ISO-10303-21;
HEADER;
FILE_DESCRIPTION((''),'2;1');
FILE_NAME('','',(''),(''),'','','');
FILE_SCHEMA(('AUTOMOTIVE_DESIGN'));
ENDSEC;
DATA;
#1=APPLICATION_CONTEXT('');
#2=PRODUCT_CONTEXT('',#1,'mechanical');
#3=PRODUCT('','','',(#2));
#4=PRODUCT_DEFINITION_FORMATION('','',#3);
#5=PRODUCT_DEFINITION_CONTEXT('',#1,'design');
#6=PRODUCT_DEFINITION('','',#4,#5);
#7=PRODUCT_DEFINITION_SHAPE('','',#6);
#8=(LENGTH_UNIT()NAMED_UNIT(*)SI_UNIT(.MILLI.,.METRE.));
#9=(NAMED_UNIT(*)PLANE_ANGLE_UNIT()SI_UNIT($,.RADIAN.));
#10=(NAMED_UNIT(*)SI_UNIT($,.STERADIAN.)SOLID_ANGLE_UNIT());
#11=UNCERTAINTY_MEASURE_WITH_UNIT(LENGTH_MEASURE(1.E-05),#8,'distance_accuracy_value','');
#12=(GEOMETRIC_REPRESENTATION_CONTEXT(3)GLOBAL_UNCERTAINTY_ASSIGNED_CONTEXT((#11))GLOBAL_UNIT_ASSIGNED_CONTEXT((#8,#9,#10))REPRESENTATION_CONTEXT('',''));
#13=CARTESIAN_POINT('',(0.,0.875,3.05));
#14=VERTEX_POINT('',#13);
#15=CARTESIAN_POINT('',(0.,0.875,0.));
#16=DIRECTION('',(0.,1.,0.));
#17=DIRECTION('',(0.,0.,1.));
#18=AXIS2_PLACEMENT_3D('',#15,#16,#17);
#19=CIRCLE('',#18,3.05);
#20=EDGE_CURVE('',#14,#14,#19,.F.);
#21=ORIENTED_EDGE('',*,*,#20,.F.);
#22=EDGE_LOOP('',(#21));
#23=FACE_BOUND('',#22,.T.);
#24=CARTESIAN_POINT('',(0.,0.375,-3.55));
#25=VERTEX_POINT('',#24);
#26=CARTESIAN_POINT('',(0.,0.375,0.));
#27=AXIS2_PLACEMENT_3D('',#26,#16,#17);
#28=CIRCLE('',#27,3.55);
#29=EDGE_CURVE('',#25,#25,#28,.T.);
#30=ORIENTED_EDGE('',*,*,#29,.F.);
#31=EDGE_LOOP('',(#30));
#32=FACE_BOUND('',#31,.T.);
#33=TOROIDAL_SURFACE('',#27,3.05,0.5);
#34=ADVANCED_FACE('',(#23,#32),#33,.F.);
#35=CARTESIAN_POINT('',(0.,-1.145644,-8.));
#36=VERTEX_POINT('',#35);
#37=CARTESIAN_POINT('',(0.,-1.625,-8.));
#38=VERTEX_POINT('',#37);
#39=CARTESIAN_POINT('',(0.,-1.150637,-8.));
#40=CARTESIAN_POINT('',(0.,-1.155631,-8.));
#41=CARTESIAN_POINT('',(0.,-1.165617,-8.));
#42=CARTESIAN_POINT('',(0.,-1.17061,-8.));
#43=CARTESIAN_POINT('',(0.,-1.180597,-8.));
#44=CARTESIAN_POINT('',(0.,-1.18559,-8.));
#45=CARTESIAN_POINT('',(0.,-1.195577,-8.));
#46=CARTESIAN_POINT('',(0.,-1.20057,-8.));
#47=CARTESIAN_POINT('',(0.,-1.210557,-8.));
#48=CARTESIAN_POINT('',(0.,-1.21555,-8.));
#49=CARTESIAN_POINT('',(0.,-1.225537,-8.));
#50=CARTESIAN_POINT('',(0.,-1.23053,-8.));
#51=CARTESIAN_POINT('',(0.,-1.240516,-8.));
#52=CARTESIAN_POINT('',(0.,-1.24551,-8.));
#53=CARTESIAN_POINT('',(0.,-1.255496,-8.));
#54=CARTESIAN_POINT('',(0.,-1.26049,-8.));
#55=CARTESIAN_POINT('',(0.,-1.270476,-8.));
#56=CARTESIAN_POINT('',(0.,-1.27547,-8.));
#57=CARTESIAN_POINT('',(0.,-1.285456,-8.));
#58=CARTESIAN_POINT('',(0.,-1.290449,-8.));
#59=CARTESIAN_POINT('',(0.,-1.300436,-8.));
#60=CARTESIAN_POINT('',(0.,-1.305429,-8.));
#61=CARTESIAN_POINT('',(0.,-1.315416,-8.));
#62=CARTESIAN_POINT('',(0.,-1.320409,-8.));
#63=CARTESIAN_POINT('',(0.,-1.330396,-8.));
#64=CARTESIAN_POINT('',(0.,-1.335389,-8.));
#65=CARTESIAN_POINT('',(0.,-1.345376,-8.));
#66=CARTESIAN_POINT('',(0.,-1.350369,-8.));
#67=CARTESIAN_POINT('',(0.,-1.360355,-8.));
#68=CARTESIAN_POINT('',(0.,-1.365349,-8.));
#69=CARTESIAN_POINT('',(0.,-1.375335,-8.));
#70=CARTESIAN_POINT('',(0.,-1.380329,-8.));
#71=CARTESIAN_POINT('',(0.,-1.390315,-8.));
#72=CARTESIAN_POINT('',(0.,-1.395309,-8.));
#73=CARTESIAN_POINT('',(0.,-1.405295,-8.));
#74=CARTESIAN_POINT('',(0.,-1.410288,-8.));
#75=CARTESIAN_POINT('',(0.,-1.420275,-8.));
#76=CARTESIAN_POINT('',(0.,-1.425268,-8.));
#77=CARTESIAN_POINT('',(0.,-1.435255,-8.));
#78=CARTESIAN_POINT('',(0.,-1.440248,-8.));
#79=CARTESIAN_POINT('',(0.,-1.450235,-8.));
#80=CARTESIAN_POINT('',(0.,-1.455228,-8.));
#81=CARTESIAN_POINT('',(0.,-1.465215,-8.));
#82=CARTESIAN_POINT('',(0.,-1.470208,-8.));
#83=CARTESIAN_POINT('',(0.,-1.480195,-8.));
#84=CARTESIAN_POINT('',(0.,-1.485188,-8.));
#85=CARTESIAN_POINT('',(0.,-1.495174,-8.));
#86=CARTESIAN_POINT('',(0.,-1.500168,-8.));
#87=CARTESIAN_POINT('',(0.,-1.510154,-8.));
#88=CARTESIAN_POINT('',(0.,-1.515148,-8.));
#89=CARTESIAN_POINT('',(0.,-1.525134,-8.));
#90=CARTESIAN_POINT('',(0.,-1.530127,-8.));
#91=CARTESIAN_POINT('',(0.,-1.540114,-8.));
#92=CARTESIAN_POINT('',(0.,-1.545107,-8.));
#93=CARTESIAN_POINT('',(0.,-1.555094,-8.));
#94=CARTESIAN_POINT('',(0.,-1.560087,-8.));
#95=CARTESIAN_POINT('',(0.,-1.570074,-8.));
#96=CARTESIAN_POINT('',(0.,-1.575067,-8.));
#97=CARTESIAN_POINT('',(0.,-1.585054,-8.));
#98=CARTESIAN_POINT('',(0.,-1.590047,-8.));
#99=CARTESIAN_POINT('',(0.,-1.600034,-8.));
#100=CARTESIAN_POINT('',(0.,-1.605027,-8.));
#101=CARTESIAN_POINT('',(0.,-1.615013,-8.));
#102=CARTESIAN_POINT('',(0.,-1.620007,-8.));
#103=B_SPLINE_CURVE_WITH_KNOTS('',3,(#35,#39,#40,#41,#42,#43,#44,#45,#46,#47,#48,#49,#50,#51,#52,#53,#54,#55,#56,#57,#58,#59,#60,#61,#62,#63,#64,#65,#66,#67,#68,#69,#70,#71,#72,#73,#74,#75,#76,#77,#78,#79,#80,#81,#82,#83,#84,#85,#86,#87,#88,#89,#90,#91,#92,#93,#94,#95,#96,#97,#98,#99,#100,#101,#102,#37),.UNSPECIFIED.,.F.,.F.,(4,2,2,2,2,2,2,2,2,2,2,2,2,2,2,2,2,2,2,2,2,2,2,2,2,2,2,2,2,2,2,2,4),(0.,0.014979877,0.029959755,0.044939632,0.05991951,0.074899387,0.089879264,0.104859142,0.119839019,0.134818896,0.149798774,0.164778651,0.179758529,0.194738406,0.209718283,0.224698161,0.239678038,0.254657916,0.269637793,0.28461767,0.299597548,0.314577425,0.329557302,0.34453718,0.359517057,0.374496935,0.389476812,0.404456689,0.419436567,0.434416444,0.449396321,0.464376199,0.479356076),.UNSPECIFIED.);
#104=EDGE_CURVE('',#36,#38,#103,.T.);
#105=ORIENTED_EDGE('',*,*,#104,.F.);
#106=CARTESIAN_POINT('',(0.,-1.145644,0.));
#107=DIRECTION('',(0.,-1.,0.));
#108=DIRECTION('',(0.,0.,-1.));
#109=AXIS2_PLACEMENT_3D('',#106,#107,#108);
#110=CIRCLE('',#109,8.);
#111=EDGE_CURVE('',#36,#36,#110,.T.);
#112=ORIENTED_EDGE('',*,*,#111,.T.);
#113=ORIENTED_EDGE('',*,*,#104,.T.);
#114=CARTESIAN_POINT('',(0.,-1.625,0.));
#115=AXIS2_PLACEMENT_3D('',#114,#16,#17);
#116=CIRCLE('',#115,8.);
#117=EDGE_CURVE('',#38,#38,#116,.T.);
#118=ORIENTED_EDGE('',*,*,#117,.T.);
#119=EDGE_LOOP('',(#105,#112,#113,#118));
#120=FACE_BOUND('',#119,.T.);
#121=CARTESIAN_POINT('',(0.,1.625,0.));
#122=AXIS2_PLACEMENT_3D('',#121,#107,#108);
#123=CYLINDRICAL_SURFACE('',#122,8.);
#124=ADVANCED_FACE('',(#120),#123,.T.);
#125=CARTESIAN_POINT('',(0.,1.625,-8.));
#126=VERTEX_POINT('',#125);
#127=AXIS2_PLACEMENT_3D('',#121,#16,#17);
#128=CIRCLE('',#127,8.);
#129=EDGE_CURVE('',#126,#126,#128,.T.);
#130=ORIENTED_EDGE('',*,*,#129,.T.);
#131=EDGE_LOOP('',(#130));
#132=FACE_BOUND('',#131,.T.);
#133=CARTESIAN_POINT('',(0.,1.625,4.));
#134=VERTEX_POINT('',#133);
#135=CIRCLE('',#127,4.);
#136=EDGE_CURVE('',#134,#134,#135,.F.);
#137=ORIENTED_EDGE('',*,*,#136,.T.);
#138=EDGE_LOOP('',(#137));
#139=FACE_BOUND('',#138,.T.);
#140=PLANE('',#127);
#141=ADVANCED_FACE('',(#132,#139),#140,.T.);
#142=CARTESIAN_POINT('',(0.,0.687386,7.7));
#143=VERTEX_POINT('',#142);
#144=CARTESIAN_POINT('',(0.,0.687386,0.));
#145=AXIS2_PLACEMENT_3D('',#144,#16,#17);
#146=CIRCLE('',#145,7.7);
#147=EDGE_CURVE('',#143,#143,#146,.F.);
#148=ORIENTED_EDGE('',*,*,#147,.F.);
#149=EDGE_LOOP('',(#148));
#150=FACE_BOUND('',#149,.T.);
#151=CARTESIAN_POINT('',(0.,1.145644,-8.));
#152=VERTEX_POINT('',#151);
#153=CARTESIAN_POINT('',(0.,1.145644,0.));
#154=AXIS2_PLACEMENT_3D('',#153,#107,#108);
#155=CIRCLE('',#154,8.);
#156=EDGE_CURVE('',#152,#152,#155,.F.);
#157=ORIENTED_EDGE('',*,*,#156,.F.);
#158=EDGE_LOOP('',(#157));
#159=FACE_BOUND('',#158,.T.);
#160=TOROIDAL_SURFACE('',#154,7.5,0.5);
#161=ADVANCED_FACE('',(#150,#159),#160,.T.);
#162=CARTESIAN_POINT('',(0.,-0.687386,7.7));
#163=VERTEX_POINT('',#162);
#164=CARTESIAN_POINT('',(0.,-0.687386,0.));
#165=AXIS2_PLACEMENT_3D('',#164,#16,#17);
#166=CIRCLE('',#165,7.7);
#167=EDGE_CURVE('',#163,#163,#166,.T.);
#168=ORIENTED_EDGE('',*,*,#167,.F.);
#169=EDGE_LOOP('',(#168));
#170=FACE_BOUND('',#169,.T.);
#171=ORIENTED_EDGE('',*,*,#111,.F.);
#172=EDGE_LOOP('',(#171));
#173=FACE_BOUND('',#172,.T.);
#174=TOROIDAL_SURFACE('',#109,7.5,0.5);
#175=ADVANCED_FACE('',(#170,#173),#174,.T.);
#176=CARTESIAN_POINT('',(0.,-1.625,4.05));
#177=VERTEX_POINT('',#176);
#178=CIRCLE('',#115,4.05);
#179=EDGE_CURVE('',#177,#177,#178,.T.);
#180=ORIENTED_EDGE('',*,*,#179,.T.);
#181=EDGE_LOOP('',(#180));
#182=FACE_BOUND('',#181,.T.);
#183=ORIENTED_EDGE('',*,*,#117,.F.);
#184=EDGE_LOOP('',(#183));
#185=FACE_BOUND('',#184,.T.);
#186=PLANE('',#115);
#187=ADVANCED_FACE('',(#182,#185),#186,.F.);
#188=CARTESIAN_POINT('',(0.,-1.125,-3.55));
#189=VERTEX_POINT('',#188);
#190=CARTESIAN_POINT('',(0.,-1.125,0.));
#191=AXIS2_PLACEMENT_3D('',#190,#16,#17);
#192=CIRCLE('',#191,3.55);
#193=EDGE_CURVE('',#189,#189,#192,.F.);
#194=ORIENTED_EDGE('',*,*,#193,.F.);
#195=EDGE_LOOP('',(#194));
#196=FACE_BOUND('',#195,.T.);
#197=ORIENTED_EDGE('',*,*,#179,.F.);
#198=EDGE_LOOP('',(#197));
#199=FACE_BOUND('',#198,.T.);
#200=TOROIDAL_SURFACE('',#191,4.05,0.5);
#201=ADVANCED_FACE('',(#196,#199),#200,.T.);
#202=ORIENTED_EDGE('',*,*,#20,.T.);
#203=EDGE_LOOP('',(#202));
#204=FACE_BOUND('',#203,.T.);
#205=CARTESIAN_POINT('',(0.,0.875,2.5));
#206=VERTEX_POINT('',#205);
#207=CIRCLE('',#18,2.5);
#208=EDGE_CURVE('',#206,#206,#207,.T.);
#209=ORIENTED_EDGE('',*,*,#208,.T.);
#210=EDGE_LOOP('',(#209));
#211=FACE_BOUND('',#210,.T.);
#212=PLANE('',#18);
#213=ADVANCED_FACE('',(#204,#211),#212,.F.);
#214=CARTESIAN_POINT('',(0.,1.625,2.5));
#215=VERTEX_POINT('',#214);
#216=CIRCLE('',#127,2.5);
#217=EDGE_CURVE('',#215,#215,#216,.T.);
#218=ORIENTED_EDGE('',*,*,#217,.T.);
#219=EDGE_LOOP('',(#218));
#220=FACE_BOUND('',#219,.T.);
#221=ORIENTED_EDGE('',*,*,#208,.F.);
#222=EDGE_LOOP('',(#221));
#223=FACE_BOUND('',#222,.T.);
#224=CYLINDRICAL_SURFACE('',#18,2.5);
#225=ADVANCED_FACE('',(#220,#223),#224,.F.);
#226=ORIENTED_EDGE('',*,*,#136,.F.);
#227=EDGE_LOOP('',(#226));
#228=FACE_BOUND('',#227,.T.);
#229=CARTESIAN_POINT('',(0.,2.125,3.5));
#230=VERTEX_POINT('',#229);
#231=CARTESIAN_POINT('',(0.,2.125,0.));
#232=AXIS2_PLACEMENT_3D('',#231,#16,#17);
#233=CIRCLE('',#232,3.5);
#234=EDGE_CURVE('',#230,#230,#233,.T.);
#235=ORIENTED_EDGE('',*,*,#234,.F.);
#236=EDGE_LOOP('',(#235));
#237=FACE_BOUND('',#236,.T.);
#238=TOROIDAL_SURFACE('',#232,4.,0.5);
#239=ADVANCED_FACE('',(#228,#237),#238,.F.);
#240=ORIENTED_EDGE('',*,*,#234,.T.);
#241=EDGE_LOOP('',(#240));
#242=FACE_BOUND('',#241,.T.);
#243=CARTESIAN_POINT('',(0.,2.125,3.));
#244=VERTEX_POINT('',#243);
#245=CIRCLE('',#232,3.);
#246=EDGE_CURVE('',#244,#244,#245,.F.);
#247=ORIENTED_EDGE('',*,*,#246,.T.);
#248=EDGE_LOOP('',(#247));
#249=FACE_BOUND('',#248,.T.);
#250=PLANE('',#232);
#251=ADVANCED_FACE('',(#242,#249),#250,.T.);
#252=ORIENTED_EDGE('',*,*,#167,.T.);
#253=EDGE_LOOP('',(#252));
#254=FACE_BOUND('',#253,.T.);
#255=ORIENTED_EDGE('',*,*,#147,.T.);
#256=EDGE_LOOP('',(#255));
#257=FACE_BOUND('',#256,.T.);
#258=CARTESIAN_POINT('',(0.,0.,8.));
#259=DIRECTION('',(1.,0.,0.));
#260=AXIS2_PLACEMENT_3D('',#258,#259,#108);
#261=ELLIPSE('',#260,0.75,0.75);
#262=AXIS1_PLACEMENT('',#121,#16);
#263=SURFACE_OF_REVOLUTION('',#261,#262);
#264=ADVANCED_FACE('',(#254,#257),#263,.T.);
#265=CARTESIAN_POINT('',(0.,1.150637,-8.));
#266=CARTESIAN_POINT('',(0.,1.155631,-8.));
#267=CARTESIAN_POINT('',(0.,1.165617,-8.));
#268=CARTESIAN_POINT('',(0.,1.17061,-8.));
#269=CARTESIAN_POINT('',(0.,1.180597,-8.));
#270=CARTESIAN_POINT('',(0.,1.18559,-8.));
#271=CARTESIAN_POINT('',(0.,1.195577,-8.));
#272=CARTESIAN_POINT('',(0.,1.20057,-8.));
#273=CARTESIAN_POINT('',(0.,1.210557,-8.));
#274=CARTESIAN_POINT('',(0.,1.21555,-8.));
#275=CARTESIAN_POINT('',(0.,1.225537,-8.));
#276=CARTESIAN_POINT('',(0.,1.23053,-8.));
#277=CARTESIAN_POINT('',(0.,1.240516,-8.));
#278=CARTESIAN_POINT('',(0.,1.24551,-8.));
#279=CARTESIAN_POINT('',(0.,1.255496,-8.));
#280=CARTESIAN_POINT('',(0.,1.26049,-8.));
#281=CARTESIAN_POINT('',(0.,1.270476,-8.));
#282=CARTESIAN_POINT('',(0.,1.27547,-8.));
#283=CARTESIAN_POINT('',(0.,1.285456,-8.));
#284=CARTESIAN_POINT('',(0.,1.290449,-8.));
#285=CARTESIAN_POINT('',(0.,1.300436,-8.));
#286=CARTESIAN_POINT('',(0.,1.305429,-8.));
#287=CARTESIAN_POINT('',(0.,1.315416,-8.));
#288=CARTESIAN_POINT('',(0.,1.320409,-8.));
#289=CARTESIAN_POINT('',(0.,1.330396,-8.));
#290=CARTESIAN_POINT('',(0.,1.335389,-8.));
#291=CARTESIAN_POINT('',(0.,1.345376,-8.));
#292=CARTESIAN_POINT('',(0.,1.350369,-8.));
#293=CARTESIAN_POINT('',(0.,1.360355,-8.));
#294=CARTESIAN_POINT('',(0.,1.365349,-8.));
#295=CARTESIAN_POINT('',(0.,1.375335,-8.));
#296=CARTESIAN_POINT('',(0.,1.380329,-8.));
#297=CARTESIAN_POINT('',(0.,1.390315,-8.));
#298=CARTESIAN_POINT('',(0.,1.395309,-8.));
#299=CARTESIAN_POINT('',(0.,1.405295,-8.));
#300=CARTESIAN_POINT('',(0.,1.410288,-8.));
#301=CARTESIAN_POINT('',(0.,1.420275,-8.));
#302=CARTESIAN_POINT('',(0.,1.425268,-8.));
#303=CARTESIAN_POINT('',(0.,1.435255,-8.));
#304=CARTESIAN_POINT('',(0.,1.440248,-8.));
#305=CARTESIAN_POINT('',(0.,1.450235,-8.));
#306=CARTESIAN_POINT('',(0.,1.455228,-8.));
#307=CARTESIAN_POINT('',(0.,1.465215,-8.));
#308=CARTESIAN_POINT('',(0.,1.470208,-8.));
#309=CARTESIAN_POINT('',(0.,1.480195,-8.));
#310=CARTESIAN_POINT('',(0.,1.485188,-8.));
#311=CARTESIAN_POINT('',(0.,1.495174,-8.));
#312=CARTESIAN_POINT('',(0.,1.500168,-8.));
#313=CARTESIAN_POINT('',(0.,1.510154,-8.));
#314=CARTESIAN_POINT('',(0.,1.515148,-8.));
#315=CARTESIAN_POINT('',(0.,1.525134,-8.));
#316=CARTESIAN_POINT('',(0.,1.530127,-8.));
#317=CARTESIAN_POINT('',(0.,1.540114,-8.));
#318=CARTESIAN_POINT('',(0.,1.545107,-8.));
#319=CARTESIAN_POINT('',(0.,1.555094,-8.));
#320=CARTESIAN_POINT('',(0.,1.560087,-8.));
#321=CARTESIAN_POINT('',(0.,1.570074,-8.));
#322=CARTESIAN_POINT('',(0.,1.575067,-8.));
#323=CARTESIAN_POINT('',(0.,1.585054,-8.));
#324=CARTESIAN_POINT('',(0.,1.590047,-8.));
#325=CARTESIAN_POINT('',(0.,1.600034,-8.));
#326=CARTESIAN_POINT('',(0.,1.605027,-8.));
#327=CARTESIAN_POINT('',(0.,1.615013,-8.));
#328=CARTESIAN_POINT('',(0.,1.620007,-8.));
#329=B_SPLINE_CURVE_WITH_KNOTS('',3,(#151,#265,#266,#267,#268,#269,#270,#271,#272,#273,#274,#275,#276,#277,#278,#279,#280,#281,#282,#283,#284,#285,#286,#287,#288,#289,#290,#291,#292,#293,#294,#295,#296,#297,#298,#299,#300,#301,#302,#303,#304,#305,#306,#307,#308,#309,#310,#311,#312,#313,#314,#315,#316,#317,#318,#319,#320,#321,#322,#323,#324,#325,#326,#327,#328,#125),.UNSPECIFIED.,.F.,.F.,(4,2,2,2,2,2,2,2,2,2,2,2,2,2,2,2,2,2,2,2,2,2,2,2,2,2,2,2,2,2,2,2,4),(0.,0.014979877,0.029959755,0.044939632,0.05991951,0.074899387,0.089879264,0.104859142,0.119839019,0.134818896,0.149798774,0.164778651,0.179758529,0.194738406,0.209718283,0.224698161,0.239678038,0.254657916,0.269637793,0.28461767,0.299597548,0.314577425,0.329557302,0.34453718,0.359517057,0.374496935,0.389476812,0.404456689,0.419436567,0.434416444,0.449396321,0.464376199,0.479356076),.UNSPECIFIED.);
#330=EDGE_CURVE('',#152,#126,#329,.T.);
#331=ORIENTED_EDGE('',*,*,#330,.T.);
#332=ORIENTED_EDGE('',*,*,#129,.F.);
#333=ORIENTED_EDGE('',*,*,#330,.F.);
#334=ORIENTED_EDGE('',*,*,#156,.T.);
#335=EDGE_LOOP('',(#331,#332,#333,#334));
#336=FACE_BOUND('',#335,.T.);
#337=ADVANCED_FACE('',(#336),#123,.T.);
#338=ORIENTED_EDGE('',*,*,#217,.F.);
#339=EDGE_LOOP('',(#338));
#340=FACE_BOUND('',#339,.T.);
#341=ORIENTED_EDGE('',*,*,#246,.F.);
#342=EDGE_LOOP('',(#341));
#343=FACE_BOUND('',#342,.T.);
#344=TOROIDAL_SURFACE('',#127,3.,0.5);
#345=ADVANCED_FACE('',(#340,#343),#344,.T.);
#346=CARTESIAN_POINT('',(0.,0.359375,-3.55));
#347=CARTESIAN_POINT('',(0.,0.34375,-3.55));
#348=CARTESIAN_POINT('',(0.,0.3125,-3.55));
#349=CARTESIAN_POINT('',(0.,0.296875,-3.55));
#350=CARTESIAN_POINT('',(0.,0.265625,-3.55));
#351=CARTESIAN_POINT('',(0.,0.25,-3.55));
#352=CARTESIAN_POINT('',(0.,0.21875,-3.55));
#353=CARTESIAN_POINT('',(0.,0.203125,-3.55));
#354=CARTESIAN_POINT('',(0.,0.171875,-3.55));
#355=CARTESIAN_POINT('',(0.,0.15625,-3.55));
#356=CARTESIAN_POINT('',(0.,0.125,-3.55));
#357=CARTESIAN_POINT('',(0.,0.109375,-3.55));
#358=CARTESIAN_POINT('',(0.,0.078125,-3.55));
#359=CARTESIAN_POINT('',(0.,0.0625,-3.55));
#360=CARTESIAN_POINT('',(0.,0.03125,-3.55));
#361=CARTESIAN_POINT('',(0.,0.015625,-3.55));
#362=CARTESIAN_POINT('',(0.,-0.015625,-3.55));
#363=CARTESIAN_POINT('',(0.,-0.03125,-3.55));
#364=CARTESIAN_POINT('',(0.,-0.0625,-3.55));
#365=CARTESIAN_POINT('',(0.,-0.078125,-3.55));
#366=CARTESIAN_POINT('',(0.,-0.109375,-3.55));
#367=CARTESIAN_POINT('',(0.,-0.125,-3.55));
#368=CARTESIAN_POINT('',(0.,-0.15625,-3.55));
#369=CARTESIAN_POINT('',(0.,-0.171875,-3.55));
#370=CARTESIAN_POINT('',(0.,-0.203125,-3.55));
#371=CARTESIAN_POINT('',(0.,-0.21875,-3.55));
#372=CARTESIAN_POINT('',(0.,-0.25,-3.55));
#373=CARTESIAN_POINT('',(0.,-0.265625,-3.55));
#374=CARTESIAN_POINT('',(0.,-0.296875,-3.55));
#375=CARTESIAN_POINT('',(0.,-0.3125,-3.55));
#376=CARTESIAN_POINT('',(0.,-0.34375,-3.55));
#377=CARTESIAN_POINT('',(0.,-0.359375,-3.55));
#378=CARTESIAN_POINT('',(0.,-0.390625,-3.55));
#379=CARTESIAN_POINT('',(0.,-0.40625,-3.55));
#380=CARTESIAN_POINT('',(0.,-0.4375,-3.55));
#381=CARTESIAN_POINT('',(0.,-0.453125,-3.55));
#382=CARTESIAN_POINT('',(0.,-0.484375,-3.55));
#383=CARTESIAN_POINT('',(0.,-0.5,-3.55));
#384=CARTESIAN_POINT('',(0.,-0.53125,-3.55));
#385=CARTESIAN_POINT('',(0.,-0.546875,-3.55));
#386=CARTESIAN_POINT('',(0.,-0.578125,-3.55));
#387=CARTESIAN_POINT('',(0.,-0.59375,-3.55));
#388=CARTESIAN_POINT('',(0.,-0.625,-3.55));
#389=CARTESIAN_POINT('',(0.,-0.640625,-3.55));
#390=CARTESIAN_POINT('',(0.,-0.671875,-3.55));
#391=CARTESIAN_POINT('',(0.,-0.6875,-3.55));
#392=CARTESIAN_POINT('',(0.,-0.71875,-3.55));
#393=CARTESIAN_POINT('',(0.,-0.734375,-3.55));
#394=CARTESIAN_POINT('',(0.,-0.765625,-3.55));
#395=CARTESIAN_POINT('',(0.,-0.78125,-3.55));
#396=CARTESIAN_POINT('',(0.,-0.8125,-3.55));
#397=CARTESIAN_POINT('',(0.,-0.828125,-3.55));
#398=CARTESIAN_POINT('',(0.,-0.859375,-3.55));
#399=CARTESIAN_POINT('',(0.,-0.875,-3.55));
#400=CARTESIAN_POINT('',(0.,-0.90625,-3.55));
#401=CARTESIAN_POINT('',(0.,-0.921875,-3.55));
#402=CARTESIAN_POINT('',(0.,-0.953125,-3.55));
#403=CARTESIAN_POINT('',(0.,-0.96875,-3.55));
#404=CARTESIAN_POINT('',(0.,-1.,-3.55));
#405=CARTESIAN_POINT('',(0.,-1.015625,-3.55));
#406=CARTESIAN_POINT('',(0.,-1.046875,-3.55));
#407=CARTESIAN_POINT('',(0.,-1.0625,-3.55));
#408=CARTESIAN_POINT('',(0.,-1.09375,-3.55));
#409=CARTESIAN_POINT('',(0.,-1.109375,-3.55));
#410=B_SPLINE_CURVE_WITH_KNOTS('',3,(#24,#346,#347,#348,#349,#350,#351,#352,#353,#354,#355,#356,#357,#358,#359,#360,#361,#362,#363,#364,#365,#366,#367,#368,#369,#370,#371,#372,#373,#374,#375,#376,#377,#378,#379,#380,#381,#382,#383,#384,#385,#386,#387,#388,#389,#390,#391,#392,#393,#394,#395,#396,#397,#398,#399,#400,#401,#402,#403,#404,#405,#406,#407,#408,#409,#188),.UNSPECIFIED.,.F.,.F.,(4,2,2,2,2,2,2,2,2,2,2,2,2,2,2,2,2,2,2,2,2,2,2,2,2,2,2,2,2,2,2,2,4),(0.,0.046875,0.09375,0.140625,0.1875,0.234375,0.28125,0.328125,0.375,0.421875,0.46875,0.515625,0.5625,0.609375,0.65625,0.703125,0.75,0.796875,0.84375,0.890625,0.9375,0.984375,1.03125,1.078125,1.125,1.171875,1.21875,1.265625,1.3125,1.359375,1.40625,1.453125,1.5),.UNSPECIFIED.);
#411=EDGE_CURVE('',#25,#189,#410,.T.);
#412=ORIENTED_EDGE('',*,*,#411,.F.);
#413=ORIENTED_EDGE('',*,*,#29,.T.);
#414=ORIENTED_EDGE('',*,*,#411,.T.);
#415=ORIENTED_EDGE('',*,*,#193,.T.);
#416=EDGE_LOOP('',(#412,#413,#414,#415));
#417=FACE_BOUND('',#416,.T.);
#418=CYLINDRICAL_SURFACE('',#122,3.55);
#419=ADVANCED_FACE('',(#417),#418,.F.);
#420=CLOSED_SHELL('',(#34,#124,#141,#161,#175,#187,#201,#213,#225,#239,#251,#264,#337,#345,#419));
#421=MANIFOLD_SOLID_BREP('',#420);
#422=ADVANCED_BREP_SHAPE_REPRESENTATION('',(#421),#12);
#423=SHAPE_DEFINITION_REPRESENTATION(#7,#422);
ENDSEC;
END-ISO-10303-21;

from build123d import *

# Parameters (mm, degrees)
SKETCH1_R           = 8
SKETCH1_R_2         = 3.55
BOSS_EXTRUDE1_DEPTH = 1.625
SKETCH3_R           = 4
SKETCH3_R_2         = 2.5
BOSS_EXTRUDE2_DEPTH = 0.75
BOSS_EXTRUDE3_START = 0.5
SKETCH4_R           = 3.5
SKETCH4_R_2         = 2.5
BOSS_EXTRUDE3_DEPTH = 0.5
FILLET2_R           = 0.5


with BuildPart() as part:
    # Sketch1 → Boss-Extrude1 (new, symmetric)
    with BuildSketch(Plane(origin=(0, 0, 0), x_dir=(1, 0, 0), z_dir=(0, 1, 0))):
        with Locations(Location((0, 0, 0), (0, 0, 90))):
            Circle(SKETCH1_R)
        with Locations(Location((0, 0, 0), (0, 0, 90))):
            Circle(SKETCH1_R_2, mode=Mode.SUBTRACT)
    extrude(amount=BOSS_EXTRUDE1_DEPTH, both=True)

    # Sketch2 → Cut-Revolve1 (revolve, cut)
    with BuildSketch(Plane(origin=(0, 0, 0), x_dir=(0, 0, -1), z_dir=(1, 0, 0)), mode=Mode.PRIVATE) as cut_revolve1_sk:
        with BuildLine():
            Line((-8, 0.75), (-8, -0.75))
            add(Edge.make_bspline(
                [(-8, -0.75), (-7.25, -0.75), (-7.25, 0), (-7.25, 0.75), (-8, 0.75)],
                knots=[4.71238898, 4.71238898, 4.71238898, 6.283185307, 6.283185307, 7.853981634, 7.853981634, 7.853981634], degree=2, weights=[1, 0.707106781, 1, 0.707106781, 1]))
        make_face()
    revolve(cut_revolve1_sk.sketch.rotate(Axis((0, 1.625, 0), (0, -1, 0)), 180), axis=Axis((0, 1.625, 0), (0, -1, 0)), mode=Mode.SUBTRACT)

    # Sketch3 → Boss-Extrude2 (add)
    with BuildSketch(Plane(origin=(0, 1.625, 0), x_dir=(1, 0, 0), z_dir=(0, 1, 0))):
        Circle(SKETCH3_R)
        with Locations(Location((0, 0, 0), (0, 0, 270))):
            Circle(SKETCH3_R_2, mode=Mode.SUBTRACT)
    extrude(amount=-BOSS_EXTRUDE2_DEPTH)

    # Sketch4 → Boss-Extrude3 (add)
    with BuildSketch(Plane(origin=(0, 1.625, 0), x_dir=(1, 0, 0), z_dir=(0, 1, 0)).offset(BOSS_EXTRUDE3_START)):
        with Locations(Location((0, 0, 0), (0, 0, 270))):
            Circle(SKETCH4_R)
        with Locations(Location((0, 0, 0), (0, 0, 270))):
            Circle(SKETCH4_R_2, mode=Mode.SUBTRACT)
    extrude(amount=-BOSS_EXTRUDE3_DEPTH)

    # Fillet2
    fillet2_edges = [part.edges().sort_by_distance(p)[0] for p in [
        (0, 0.75, 8),
        (0, -0.75, 8),
        (0, 0.875, 3.55),
        (0, 1.625, -3.5),
        (0, 2.125, -2.5),
        (0, -1.625, 3.55),
    ]]
    fillet(fillet2_edges, radius=FILLET2_R - 0.0001)  # a hair under: the kernel refuses the full size


solid = part.part
